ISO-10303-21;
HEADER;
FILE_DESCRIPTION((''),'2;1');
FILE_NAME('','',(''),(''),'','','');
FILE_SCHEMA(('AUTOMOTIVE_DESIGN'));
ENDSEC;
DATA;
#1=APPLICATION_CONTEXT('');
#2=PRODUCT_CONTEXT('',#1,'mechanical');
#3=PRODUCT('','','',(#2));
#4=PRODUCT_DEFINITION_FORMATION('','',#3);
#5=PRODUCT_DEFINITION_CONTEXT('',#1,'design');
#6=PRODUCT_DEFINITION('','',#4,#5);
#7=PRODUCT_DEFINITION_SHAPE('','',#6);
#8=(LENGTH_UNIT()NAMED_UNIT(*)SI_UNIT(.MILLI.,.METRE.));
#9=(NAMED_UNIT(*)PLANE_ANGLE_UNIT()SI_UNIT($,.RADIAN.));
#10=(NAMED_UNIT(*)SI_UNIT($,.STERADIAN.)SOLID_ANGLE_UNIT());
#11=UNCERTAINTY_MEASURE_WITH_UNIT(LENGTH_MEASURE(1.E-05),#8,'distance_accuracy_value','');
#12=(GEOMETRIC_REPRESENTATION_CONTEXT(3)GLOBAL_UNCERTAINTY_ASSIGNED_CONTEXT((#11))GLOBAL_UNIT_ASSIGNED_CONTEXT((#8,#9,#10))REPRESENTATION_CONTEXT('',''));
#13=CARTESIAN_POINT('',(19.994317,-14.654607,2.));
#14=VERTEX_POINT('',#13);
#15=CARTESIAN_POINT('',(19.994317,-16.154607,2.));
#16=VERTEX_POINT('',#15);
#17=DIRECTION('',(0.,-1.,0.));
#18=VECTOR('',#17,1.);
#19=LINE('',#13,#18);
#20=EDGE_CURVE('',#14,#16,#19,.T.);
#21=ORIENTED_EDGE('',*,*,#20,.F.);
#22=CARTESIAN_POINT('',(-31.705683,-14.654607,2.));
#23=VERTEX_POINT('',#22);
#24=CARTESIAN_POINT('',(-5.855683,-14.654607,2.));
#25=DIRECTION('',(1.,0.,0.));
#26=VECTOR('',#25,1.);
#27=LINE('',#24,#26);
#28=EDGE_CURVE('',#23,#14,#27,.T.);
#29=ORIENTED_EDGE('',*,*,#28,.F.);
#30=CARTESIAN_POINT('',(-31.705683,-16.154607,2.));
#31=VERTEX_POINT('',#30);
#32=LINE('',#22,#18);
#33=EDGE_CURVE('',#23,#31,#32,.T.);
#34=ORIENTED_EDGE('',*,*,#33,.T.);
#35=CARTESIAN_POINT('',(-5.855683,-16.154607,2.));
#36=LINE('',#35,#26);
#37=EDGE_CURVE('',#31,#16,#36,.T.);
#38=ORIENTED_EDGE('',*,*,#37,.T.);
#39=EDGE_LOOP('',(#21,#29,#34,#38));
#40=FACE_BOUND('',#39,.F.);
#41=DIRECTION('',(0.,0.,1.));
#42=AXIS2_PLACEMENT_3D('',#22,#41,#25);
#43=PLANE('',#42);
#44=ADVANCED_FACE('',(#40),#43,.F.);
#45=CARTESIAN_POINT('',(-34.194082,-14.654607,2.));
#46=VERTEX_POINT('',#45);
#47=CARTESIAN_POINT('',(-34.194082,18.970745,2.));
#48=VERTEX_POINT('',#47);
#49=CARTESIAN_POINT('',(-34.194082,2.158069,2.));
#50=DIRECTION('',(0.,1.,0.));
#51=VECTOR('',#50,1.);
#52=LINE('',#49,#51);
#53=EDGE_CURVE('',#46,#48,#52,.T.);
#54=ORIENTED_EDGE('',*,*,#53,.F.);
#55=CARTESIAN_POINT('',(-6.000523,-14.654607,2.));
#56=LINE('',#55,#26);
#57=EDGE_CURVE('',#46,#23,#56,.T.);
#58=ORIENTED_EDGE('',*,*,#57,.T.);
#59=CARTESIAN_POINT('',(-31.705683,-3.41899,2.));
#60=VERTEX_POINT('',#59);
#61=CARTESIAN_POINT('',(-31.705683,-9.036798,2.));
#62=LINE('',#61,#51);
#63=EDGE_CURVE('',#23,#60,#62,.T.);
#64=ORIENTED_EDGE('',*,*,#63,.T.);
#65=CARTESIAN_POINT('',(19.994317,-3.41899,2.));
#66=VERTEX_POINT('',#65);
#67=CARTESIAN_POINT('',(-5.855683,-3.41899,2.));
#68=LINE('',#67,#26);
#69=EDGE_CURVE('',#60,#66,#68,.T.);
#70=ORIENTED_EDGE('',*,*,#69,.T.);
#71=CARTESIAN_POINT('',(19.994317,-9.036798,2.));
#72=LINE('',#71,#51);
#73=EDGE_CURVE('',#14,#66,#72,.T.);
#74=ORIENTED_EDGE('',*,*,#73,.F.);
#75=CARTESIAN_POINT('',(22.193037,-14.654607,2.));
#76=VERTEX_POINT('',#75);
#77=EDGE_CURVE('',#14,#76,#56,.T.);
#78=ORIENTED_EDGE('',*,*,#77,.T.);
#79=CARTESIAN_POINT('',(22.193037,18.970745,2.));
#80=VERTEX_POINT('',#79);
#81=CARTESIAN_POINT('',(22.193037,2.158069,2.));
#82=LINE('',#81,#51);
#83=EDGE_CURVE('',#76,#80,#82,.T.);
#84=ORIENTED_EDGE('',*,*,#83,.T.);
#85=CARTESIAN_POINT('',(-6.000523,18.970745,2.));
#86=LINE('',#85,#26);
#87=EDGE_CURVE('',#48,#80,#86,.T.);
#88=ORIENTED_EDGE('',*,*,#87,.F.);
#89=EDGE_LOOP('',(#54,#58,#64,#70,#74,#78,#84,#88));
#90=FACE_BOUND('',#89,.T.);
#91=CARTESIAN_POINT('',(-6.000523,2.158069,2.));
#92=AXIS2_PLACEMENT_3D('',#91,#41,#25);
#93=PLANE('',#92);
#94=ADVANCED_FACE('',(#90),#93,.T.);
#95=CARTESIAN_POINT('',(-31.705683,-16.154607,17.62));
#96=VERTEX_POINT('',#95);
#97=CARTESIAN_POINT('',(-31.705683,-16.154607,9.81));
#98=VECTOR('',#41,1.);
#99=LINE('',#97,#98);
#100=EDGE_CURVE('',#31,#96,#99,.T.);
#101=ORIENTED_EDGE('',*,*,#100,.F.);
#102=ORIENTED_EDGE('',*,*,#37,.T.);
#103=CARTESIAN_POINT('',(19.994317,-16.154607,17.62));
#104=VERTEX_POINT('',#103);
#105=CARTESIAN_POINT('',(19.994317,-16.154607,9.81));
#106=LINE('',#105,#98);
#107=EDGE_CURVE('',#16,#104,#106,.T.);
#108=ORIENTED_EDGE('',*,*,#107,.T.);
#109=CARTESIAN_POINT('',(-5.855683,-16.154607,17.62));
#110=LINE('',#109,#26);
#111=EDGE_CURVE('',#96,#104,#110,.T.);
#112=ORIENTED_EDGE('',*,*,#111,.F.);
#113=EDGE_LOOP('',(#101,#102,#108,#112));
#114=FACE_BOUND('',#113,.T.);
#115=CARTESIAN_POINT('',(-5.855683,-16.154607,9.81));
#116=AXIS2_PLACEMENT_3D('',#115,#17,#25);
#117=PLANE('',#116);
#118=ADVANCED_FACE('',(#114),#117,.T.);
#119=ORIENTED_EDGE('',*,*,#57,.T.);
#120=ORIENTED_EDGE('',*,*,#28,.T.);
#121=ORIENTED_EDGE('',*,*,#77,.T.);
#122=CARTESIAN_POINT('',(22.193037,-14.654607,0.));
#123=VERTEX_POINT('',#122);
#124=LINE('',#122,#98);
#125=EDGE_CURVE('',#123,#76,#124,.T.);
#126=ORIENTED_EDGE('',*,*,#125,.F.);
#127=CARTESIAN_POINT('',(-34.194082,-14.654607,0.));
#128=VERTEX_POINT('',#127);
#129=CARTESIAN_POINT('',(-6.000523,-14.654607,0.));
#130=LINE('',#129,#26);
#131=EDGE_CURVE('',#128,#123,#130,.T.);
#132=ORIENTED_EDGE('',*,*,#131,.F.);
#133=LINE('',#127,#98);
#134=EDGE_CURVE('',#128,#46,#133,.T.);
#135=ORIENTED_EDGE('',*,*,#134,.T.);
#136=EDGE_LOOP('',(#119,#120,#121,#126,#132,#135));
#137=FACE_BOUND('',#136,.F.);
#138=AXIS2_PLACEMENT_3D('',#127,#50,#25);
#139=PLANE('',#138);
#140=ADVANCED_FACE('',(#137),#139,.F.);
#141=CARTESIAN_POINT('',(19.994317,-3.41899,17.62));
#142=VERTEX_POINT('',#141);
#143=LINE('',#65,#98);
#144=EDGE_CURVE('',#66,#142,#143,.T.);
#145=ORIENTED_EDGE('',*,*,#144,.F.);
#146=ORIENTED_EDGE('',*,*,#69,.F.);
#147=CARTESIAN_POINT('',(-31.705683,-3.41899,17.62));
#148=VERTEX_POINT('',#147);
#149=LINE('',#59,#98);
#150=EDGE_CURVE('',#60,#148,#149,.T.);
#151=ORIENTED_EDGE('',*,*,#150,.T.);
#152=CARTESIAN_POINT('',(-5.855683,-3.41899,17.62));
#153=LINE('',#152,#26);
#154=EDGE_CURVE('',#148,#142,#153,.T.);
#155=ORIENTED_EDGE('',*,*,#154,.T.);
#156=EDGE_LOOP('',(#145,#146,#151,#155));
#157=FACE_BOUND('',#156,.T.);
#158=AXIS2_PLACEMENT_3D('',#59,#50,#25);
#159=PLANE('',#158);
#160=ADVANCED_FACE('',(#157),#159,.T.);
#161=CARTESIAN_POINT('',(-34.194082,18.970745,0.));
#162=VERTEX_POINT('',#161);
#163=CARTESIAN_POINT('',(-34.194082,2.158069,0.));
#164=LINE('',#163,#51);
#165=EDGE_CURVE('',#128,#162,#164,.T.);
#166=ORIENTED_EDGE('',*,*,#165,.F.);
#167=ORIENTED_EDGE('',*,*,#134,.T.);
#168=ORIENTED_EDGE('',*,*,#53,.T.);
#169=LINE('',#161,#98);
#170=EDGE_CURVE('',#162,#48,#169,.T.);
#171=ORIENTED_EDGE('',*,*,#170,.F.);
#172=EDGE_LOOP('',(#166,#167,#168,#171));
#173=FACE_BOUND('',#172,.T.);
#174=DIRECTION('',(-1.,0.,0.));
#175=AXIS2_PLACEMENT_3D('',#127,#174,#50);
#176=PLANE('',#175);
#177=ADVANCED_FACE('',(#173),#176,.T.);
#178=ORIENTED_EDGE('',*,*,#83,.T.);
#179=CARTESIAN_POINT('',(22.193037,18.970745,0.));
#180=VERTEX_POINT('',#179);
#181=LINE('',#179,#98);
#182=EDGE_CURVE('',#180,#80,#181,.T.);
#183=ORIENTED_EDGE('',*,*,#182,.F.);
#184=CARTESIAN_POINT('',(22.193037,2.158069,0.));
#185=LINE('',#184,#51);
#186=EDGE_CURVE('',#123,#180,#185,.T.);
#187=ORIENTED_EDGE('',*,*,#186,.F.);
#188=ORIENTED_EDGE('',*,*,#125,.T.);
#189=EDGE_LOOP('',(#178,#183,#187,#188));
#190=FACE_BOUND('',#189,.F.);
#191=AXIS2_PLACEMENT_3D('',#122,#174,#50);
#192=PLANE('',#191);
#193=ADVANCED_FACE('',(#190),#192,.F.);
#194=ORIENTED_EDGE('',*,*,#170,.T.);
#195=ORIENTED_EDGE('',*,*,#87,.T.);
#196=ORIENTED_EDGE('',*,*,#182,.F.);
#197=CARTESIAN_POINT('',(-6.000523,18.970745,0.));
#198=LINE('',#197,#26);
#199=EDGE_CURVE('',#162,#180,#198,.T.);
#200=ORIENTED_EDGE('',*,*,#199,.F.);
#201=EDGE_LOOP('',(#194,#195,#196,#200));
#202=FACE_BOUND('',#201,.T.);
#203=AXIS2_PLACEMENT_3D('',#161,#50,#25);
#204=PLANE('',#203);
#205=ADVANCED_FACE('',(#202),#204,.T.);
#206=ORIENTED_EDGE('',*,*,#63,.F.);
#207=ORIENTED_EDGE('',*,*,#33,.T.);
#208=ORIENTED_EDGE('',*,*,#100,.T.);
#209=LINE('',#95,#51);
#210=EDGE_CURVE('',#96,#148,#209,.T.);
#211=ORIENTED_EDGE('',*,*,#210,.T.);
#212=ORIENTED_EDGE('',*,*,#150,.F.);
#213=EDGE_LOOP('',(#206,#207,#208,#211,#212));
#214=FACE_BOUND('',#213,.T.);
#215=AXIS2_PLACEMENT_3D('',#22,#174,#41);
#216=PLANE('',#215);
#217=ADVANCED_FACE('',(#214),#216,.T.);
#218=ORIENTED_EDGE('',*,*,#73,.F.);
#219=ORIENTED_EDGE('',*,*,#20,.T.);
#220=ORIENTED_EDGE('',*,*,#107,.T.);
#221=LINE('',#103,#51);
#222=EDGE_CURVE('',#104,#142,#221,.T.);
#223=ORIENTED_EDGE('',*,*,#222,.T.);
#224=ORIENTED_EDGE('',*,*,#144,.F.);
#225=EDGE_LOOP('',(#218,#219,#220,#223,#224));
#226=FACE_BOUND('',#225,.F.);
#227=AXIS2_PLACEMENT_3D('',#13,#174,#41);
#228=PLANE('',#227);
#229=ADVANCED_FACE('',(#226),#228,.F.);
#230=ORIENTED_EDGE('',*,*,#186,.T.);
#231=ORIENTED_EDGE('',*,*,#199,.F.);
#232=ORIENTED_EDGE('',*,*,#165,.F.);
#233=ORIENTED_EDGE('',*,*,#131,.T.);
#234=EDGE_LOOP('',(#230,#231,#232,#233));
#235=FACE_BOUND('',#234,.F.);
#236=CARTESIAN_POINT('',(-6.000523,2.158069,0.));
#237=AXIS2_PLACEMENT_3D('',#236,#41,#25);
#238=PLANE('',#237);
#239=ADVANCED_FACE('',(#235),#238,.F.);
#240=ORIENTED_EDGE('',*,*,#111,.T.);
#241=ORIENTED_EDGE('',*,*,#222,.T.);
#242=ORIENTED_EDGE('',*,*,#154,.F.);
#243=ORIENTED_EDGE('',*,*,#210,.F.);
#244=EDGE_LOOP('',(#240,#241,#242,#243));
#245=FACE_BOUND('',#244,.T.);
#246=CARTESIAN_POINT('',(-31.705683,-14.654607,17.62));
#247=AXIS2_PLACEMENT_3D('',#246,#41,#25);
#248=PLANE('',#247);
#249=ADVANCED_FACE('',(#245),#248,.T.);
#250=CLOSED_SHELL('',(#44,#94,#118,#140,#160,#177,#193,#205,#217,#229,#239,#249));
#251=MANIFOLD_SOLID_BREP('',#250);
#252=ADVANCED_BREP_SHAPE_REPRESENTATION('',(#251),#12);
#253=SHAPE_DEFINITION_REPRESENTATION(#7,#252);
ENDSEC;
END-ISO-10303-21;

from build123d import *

# Parameters (mm, degrees)
F0_W     = 56.3871189952
F0_H     = 33.6253512651
F1_DEPTH = 2
F2_W     = 51.7
F2_H     = 11.2356165416
F3_DEPTH = 15.62
F4_W     = 51.7
F4_H     = 15.62
F5_DEPTH = 1.5


# Not quite as in the source:
# - a feature of the source that left no trace in its solid (it failed there, or was rolled back) is left out


with BuildPart() as f1:
    # F0 (on Top) → F1 (new body)
    with BuildSketch(Plane.XY):
        with Locations((-6.0005225241, 2.1580690518)):
            Rectangle(F0_W, F0_H)
    extrude(amount=F1_DEPTH)

    # F2 (on face) → F3 (join)
    with BuildSketch(Plane.XY.offset(2)):
        with Locations((-5.8556830972, -9.0367983099)):
            Rectangle(F2_W, F2_H)
    extrude(amount=F3_DEPTH)

    # F4 (on face) → F5 (join)
    with BuildSketch(Plane.XZ.offset(14.6546065807)):
        with Locations((-5.8556830972, 9.81)):
            Rectangle(F4_W, F4_H)
    extrude(amount=F5_DEPTH)


solid = f1.part
